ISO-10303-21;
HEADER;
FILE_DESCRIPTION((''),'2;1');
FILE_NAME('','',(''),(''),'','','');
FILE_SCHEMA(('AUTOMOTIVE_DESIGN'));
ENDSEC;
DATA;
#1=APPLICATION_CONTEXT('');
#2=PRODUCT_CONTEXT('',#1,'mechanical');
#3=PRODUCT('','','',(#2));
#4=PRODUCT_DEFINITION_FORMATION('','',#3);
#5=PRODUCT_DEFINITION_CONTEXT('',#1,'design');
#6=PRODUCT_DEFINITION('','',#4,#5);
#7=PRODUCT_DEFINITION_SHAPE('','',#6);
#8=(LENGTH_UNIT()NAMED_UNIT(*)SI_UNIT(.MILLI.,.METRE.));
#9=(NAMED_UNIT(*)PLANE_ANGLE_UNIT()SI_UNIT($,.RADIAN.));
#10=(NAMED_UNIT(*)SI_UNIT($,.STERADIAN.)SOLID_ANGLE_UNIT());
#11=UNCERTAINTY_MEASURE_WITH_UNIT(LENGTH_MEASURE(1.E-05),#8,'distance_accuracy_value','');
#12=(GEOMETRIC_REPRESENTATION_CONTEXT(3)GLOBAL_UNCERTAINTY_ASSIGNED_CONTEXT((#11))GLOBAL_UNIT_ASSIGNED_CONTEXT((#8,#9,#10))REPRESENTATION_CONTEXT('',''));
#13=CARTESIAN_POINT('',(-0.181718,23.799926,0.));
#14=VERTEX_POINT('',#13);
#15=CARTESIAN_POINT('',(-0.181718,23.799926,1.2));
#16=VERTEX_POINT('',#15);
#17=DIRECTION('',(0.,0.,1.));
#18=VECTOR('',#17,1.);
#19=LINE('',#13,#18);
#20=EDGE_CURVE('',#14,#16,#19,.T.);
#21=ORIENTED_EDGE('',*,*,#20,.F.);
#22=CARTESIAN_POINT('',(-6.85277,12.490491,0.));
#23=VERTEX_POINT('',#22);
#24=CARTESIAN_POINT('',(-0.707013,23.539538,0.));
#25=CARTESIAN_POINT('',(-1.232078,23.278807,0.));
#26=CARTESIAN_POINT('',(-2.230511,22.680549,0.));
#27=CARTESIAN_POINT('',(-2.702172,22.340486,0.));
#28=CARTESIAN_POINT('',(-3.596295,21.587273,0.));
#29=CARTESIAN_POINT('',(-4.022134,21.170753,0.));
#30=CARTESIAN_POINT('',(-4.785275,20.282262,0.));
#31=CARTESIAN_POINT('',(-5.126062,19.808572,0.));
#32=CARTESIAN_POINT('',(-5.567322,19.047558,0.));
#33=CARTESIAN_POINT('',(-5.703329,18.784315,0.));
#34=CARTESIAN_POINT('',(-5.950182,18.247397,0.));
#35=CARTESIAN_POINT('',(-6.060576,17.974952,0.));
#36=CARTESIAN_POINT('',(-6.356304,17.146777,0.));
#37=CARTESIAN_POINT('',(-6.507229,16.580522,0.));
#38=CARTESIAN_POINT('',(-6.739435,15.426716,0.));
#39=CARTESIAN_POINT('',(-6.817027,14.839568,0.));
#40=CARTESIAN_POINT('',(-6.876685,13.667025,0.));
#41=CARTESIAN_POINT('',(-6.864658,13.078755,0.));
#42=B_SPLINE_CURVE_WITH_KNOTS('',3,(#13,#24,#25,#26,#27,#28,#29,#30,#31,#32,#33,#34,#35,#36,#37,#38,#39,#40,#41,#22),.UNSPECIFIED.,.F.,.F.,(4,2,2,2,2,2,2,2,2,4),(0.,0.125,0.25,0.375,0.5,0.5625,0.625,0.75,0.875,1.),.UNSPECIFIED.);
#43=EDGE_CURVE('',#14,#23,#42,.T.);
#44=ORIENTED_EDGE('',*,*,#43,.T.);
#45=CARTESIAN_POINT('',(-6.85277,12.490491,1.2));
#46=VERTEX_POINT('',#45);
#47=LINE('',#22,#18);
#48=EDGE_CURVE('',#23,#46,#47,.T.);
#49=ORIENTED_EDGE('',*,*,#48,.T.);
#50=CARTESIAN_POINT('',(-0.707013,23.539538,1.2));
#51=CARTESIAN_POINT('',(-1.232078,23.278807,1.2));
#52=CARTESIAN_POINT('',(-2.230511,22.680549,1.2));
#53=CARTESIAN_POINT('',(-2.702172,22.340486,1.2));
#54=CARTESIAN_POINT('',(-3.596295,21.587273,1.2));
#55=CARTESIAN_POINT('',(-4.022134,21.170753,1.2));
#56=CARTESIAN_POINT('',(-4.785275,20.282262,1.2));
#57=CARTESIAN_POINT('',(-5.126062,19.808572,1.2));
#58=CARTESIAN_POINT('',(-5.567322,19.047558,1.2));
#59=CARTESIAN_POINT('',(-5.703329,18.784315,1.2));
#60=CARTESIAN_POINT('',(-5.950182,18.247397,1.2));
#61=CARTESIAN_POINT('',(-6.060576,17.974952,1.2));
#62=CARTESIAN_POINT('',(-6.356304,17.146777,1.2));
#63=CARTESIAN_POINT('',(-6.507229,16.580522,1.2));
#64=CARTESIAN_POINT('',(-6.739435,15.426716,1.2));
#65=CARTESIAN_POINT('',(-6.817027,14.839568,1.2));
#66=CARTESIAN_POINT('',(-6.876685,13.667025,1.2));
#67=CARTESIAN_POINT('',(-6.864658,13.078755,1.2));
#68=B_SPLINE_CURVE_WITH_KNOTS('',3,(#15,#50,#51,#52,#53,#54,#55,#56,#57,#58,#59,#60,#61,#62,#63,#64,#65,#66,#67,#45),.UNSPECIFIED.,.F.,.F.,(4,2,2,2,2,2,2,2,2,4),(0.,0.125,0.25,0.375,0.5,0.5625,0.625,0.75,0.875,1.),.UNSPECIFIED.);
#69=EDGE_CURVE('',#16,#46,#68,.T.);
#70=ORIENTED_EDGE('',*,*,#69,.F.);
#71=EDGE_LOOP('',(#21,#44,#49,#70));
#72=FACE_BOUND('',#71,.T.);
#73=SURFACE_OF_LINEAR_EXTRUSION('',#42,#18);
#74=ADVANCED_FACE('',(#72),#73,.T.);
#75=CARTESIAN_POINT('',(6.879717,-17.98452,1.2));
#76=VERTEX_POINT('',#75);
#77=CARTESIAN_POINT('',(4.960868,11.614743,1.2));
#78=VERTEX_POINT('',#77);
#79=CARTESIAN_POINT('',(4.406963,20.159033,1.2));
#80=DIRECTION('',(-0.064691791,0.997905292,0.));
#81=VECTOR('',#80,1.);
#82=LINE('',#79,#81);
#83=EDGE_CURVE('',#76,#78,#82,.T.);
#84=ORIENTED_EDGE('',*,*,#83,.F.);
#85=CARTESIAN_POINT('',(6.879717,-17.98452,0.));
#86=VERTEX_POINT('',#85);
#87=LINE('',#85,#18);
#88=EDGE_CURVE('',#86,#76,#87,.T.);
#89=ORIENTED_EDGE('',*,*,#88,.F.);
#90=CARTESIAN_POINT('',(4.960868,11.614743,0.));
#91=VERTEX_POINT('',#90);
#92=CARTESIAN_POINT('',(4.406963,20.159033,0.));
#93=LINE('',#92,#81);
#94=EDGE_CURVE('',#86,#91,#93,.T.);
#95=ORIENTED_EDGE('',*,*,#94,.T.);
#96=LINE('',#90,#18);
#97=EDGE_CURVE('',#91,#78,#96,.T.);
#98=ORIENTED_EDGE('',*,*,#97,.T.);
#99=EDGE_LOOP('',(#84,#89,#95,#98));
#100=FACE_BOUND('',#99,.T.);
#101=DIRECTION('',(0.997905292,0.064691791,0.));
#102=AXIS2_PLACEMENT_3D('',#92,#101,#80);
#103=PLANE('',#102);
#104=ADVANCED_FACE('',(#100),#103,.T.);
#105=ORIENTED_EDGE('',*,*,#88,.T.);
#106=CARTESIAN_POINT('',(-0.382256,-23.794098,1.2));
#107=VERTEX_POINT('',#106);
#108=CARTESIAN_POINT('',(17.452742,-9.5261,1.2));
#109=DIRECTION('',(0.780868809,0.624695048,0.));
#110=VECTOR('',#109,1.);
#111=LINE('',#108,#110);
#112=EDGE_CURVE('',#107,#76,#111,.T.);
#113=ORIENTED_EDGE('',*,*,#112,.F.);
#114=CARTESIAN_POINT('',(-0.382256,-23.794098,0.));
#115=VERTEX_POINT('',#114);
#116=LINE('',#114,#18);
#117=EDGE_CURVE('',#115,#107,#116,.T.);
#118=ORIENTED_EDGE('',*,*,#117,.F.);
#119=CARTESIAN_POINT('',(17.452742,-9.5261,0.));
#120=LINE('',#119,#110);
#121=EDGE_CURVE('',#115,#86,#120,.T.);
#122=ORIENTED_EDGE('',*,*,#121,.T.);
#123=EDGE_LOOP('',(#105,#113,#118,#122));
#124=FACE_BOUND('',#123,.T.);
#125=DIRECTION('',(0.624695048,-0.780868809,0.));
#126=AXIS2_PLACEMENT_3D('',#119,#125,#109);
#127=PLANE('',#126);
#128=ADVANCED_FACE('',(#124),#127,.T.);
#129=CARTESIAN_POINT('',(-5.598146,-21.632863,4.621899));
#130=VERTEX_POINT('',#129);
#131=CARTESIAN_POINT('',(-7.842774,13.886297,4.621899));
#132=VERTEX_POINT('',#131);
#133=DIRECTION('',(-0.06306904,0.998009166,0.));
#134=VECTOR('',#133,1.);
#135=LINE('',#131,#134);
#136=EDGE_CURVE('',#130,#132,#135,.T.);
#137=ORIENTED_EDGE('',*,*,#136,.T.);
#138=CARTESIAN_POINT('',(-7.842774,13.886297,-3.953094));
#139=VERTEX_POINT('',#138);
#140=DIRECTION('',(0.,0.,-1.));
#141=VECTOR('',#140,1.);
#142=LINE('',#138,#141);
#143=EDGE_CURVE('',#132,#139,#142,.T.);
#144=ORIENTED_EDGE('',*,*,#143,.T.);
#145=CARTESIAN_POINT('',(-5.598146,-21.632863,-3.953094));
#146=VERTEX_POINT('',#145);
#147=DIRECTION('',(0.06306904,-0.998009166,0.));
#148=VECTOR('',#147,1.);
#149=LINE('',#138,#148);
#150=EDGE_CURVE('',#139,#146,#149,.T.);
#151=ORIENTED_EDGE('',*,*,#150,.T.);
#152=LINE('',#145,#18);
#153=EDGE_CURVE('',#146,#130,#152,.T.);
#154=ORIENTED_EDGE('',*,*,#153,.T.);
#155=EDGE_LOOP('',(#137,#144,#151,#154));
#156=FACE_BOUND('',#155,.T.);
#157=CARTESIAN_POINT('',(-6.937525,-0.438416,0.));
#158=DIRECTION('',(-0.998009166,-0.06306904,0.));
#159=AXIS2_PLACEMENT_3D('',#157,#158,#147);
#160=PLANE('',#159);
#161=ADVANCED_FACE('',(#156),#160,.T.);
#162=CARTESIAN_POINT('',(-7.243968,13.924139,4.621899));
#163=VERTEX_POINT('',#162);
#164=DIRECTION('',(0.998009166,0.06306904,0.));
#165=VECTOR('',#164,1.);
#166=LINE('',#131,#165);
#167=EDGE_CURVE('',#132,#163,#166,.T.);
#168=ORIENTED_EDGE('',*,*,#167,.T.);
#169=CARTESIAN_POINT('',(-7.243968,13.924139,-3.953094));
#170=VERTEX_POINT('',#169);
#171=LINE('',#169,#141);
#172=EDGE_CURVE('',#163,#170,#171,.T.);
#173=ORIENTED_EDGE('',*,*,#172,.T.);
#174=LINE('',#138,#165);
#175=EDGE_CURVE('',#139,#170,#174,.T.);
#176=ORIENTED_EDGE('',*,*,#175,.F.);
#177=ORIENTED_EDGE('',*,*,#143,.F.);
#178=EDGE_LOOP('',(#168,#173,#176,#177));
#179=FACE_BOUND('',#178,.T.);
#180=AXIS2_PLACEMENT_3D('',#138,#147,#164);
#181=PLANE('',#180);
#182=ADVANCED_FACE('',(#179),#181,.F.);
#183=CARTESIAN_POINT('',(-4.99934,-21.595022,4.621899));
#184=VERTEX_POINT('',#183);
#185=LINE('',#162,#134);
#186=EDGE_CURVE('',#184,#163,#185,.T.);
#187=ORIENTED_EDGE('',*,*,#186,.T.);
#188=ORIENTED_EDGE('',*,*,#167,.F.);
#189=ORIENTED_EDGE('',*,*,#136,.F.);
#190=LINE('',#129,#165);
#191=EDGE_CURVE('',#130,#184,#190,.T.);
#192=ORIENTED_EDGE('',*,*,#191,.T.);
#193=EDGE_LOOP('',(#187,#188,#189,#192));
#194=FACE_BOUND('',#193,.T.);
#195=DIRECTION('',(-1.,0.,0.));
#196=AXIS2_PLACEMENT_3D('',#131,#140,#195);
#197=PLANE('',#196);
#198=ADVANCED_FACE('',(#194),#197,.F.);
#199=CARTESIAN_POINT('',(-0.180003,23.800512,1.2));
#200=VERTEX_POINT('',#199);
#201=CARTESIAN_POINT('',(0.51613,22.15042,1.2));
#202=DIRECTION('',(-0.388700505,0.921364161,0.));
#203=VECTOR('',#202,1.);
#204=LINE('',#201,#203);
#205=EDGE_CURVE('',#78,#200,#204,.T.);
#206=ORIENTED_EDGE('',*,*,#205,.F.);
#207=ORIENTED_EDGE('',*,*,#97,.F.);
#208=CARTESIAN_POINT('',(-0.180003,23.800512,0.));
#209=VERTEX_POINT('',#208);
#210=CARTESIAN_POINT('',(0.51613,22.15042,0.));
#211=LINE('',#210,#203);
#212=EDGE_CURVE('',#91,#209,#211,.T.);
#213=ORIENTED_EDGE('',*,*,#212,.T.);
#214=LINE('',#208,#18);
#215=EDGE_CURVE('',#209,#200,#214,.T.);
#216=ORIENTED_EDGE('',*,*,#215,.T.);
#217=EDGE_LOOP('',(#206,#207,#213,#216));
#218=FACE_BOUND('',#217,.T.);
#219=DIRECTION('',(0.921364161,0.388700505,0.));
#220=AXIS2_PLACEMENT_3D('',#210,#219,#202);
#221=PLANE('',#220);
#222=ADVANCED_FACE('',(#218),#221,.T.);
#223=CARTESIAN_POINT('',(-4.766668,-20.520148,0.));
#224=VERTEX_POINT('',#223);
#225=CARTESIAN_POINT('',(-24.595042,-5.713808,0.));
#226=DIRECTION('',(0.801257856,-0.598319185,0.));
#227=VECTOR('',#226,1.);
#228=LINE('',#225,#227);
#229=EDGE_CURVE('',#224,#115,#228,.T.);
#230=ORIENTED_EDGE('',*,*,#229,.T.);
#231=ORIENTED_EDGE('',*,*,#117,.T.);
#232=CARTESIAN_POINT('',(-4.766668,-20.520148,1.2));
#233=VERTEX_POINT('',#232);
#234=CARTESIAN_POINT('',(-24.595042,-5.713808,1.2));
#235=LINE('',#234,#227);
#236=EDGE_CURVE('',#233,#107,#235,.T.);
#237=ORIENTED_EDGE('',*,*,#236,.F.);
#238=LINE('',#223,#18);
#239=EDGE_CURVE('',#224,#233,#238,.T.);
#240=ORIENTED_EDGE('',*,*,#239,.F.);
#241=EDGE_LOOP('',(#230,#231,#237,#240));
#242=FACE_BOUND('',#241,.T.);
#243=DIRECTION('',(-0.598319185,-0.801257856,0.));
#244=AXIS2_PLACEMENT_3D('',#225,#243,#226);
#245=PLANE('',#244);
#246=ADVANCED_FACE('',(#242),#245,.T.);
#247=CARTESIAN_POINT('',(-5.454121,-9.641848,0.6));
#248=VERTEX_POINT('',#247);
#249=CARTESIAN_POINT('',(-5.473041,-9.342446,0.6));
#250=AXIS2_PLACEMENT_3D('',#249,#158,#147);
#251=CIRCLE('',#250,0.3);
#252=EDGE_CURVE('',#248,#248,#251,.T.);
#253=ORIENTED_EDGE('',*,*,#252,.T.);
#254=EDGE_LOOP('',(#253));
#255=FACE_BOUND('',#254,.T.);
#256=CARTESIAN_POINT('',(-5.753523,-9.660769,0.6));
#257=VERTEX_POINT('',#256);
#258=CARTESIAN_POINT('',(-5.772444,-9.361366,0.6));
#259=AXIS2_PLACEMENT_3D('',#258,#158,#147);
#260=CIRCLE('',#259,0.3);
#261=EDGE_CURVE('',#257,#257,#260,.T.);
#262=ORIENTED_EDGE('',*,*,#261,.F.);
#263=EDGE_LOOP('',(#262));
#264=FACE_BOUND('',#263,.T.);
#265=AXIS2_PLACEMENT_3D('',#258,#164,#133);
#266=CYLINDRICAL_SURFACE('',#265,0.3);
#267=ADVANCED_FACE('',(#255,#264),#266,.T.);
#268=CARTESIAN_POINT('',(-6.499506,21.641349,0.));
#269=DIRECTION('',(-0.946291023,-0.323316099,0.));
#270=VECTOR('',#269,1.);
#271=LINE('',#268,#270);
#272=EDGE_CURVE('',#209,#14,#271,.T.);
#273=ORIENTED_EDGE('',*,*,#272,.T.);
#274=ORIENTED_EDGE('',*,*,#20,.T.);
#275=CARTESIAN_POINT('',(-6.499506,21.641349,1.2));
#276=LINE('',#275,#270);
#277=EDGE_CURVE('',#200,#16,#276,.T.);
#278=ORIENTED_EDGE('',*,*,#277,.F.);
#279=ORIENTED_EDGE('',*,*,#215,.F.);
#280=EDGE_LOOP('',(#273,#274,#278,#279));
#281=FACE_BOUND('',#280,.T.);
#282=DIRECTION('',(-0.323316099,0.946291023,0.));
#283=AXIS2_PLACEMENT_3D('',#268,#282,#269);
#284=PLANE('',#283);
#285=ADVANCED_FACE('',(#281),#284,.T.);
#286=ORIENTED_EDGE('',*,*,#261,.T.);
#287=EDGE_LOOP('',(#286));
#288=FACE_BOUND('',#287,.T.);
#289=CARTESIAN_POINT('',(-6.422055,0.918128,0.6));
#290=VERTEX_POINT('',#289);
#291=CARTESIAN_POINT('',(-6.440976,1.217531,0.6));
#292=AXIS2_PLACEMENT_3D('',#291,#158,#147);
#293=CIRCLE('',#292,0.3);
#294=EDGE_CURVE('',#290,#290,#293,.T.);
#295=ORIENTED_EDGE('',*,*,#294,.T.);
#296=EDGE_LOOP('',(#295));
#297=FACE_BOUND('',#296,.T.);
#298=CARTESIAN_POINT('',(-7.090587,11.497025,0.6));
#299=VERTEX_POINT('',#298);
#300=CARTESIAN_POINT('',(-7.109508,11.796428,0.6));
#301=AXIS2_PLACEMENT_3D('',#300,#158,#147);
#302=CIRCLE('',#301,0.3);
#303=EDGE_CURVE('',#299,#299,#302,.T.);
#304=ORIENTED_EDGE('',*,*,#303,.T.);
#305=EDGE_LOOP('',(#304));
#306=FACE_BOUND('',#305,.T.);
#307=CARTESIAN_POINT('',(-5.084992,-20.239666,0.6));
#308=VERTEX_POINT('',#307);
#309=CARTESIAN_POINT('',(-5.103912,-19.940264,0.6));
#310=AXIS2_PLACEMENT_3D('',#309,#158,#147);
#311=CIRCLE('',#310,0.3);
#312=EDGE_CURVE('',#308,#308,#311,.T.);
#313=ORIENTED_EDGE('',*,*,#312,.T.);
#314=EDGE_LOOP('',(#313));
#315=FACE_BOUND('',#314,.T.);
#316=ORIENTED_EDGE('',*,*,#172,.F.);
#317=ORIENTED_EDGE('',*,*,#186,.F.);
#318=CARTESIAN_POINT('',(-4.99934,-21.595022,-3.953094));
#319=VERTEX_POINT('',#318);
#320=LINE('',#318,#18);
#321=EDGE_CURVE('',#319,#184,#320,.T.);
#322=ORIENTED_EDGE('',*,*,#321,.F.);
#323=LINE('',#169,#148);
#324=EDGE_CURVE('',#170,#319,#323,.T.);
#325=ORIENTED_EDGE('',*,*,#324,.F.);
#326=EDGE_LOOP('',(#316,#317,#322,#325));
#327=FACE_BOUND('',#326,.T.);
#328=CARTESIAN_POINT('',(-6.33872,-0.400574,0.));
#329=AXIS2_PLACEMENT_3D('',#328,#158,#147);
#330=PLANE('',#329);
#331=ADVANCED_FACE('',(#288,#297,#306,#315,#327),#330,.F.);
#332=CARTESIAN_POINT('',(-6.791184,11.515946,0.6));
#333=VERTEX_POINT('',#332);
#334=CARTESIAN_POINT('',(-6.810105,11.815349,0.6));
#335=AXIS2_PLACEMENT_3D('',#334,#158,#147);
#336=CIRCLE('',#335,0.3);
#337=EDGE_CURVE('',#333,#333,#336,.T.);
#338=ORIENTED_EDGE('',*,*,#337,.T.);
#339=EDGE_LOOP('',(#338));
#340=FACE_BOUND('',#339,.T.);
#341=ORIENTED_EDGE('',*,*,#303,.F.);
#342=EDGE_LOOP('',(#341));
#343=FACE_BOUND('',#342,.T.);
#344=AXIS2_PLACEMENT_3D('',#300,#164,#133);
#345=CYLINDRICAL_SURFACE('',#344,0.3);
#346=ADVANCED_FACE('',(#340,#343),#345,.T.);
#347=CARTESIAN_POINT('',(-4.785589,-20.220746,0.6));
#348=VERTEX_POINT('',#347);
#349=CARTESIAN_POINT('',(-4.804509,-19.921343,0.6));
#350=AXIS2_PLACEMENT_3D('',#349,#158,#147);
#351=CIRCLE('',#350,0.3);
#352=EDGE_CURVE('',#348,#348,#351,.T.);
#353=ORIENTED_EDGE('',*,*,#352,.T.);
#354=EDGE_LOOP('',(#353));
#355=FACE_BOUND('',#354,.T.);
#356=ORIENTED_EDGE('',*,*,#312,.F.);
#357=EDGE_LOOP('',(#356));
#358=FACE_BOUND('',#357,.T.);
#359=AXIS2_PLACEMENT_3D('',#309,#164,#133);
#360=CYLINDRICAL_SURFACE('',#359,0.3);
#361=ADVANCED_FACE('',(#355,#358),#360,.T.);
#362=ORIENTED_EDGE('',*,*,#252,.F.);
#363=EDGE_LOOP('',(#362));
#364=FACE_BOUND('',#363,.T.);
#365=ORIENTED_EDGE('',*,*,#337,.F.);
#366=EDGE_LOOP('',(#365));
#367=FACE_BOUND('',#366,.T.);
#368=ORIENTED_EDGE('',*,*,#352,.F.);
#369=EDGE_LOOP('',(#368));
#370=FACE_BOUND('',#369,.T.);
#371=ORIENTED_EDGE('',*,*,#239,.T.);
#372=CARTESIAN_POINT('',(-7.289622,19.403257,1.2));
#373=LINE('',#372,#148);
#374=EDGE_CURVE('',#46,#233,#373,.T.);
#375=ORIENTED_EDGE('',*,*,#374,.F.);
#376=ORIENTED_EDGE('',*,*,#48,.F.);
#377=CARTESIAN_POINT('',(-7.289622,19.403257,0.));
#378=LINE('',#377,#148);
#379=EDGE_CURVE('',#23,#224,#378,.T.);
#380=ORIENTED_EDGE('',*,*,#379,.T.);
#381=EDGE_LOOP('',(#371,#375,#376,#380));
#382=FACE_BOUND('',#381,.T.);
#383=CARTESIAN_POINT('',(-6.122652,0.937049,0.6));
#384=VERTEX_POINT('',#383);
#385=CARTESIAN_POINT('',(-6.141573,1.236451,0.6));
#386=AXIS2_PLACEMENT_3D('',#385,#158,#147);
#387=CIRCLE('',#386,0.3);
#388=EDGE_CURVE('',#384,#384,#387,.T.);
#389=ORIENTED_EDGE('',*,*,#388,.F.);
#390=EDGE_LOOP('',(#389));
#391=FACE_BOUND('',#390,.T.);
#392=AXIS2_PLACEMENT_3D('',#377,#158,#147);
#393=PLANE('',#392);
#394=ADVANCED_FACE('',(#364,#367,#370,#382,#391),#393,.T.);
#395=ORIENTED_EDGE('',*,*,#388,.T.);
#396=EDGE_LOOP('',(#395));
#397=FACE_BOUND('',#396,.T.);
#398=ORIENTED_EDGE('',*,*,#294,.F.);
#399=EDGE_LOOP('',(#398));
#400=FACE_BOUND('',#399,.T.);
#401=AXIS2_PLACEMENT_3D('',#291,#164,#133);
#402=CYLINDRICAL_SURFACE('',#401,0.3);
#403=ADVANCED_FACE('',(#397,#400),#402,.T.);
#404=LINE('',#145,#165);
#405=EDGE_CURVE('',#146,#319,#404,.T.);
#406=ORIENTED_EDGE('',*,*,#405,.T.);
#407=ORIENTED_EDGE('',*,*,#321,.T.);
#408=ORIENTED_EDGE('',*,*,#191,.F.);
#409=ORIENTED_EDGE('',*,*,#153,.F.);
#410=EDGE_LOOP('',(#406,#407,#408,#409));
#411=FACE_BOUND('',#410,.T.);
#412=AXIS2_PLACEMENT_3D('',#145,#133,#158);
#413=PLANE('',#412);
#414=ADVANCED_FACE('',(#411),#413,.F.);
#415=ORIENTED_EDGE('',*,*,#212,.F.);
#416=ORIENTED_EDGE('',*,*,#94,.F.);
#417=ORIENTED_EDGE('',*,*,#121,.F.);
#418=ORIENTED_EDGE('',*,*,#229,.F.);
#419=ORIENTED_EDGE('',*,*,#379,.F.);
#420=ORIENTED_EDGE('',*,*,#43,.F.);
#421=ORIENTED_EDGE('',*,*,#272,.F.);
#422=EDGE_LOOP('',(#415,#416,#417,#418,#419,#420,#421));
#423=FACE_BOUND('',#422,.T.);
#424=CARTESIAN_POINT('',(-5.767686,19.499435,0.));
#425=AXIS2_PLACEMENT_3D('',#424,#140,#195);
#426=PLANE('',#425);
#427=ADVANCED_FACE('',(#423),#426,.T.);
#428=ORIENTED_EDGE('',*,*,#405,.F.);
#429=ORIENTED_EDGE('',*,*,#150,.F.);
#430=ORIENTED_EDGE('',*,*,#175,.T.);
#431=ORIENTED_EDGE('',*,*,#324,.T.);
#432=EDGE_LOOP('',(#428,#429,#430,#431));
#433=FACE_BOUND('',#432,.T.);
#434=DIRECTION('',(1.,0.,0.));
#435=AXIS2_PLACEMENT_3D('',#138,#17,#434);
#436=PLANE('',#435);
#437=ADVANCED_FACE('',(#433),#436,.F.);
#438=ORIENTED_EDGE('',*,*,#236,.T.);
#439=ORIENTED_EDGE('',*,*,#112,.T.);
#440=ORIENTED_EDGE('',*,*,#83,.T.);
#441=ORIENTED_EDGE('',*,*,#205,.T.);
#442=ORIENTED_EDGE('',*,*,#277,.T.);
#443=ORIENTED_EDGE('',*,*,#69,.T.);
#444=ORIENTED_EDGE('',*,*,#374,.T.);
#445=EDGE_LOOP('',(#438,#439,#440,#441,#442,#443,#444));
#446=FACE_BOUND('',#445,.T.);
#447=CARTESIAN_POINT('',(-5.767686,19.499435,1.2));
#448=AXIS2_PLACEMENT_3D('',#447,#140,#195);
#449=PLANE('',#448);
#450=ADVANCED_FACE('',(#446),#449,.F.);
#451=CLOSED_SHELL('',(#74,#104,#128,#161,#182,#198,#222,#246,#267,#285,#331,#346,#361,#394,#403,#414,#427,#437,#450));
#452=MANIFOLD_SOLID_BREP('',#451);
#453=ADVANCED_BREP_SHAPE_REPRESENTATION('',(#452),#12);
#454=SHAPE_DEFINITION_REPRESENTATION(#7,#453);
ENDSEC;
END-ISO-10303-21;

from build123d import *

# Parameters (mm, degrees)
EXTRUDE_1_DEPTH     = 1.2
CUT_EXTRUDE_START   = -1.2
CUT_EXTRUDE_1_DEPTH = 1.2
SKETCH_4_R          = 0.3
EXTRUDE_2_DEPTH     = 0.3
SKETCH_5_W          = 8.574992792
SKETCH_5_H          = 35.59001433
EXTRUDE_3_DEPTH     = 0.6


# Read off the part's stored shape, not the designer's step: Вырез-Вытянуть-Тонкостенный1
with BuildPart() as part:
    # Эскиз1 → Бобышка-Вытянуть1 (new body)
    with BuildSketch(Plane.XY):
        with BuildLine():
            Line((-5.154205728, -20.72997941), (-0.373828409, -24.299606142))
            Line((-0.373828409, -24.299606142), (7.292363911, -18.166652286))
            Line((7.292363911, -18.166652286), (5.355661958, 11.708005491))
            Line((5.355661958, 11.708005491), (0.043580434, 24.299606142))
            Line((0.043580434, 24.299606142), (-0.335864947, 24.169962303))
            add(Edge.make_bspline(
                [(-0.335864947, 24.169962303), (-0.915680869, 23.882560356), (-2.036028517, 23.32722877), (-3.511970223, 22.237099766), (-4.75482851, 21.003209681), (-5.762815681, 19.609778776), (-6.510522146, 18.041460832), (-7.00511156, 16.321943976), (-7.292363911, 14.445670921), (-7.266146832, 13.148358332), (-7.252515423, 12.473828633)],
                knots=[0, 0, 0, 0, 0.133243547, 0.257459461, 0.376453369, 0.49320762, 0.610289886, 0.732843248, 0.86109349, 1, 1, 1, 1], degree=3))
            Line((-7.252515423, 12.473828633), (-5.154205728, -20.72997941))
        make_face()
    extrude(amount=EXTRUDE_1_DEPTH)

    # Вырез-Вытянуть-Тонкостенный1 outline → Вырез-Вытянуть-Тонкостенный1 (cut)
    with BuildSketch(Plane.XY.offset(1.2).offset(CUT_EXTRUDE_START)):
        with BuildLine():
            Line((0.043580434, 24.299606142), (-0.335864947, 24.169962303))
            add(Edge.make_bspline(
                [(-0.335864947, 24.169962303), (-0.915680869, 23.882560356), (-2.036028517, 23.32722877), (-3.511970223, 22.237099766), (-4.75482851, 21.003209681), (-5.762815681, 19.609778776), (-6.510522146, 18.041460832), (-7.00511156, 16.321943976), (-7.292363911, 14.445670921), (-7.266146832, 13.148358332), (-7.252515423, 12.473828633)],
                knots=[0, 0, 0, 0, 0.133243547, 0.257459461, 0.376453369, 0.49320762, 0.610289886, 0.732843248, 0.86109349, 1, 1, 1, 1], degree=3))
            Line((-7.252515423, 12.473828633), (-5.154205728, -20.72997941))
            Line((-5.154205728, -20.72997941), (-0.373828409, -24.299606142))
            Line((-0.373828409, -24.299606142), (7.292363911, -18.166652286))
            Line((7.292363911, -18.166652286), (5.355661958, 11.708005491))
            Line((5.355661958, 11.708005491), (0.043580434, 24.299606142))
        make_face()
        with BuildLine():
            add(Edge.make_bspline(
                [(-0.181718189, 23.79992617), (-0.707013415, 23.539538063), (-1.232077833, 23.278807084), (-2.230510803, 22.680549291), (-2.702172016, 22.340486172), (-3.596295179, 21.58727288), (-4.022133554, 21.170752521), (-4.785274575, 20.282262055), (-5.126061609, 19.808572418), (-5.567321736, 19.047557585), (-5.703329339, 18.784315196), (-5.950182465, 18.247397148), (-6.060575566, 17.974952319), (-6.35630443, 17.146776614), (-6.507229216, 16.580522405), (-6.739435456, 15.426716133), (-6.817026677, 14.83956809), (-6.876685102, 13.667024978), (-6.864657606, 13.078754602), (-6.852770472, 12.490490929)],
                knots=[0, 0, 0, 0, 0.125, 0.125, 0.25, 0.25, 0.375, 0.375, 0.5, 0.5, 0.5625, 0.5625, 0.625, 0.625, 0.75, 0.75, 0.875, 0.875, 1, 1, 1, 1], degree=3))
            Line((-0.181718189, 23.79992617), (-0.180003158, 23.800512138))
            Line((-0.180003158, 23.800512138), (4.960868317, 11.614742715))
            Line((4.960868317, 11.614742715), (6.879717061, -17.984519827))
            Line((6.879717061, -17.984519827), (-0.382255806, -23.794098121))
            Line((-0.382255806, -23.794098121), (-4.766668047, -20.520148369))
            Line((-4.766668047, -20.520148369), (-6.852770472, 12.490490929))
        make_face(mode=Mode.SUBTRACT)
    extrude(amount=CUT_EXTRUDE_1_DEPTH, mode=Mode.SUBTRACT)

    # Эскиз4 → Бобышка-Вытянуть2 (add)
    with BuildSketch(Plane(origin=(-6.03931721, -0.38165375, 0), x_dir=(0, 0, 1), z_dir=(-0.9980091663650418, -0.06306904035542692, 0))):
        with Locations(Location((0.6, -19.578666988, 0), (0, 0, 270))):
            Circle(SKETCH_4_R)
        with Locations(Location((0.6, -8.978666988, 0), (0, 0, 270))):
            Circle(SKETCH_4_R)
        with Locations(Location((0.6, 1.621333012, 0), (0, 0, 270))):
            Circle(SKETCH_4_R)
        with Locations(Location((0.6, 12.221333012, 0), (0, 0, 270))):
            Circle(SKETCH_4_R)
    extrude(amount=EXTRUDE_2_DEPTH)

    # Эскиз5 → Бобышка-Вытянуть3 (add)
    with BuildSketch(Plane(origin=(-6.33871996, -0.400574462, 0), x_dir=(0, 0, 1), z_dir=(-0.9980091663650418, -0.06306904035542692, 0))):
        with Locations((0.334402878, -3.441718967)):
            Rectangle(SKETCH_5_W, SKETCH_5_H)
    extrude(amount=EXTRUDE_3_DEPTH)


solid = part.part
